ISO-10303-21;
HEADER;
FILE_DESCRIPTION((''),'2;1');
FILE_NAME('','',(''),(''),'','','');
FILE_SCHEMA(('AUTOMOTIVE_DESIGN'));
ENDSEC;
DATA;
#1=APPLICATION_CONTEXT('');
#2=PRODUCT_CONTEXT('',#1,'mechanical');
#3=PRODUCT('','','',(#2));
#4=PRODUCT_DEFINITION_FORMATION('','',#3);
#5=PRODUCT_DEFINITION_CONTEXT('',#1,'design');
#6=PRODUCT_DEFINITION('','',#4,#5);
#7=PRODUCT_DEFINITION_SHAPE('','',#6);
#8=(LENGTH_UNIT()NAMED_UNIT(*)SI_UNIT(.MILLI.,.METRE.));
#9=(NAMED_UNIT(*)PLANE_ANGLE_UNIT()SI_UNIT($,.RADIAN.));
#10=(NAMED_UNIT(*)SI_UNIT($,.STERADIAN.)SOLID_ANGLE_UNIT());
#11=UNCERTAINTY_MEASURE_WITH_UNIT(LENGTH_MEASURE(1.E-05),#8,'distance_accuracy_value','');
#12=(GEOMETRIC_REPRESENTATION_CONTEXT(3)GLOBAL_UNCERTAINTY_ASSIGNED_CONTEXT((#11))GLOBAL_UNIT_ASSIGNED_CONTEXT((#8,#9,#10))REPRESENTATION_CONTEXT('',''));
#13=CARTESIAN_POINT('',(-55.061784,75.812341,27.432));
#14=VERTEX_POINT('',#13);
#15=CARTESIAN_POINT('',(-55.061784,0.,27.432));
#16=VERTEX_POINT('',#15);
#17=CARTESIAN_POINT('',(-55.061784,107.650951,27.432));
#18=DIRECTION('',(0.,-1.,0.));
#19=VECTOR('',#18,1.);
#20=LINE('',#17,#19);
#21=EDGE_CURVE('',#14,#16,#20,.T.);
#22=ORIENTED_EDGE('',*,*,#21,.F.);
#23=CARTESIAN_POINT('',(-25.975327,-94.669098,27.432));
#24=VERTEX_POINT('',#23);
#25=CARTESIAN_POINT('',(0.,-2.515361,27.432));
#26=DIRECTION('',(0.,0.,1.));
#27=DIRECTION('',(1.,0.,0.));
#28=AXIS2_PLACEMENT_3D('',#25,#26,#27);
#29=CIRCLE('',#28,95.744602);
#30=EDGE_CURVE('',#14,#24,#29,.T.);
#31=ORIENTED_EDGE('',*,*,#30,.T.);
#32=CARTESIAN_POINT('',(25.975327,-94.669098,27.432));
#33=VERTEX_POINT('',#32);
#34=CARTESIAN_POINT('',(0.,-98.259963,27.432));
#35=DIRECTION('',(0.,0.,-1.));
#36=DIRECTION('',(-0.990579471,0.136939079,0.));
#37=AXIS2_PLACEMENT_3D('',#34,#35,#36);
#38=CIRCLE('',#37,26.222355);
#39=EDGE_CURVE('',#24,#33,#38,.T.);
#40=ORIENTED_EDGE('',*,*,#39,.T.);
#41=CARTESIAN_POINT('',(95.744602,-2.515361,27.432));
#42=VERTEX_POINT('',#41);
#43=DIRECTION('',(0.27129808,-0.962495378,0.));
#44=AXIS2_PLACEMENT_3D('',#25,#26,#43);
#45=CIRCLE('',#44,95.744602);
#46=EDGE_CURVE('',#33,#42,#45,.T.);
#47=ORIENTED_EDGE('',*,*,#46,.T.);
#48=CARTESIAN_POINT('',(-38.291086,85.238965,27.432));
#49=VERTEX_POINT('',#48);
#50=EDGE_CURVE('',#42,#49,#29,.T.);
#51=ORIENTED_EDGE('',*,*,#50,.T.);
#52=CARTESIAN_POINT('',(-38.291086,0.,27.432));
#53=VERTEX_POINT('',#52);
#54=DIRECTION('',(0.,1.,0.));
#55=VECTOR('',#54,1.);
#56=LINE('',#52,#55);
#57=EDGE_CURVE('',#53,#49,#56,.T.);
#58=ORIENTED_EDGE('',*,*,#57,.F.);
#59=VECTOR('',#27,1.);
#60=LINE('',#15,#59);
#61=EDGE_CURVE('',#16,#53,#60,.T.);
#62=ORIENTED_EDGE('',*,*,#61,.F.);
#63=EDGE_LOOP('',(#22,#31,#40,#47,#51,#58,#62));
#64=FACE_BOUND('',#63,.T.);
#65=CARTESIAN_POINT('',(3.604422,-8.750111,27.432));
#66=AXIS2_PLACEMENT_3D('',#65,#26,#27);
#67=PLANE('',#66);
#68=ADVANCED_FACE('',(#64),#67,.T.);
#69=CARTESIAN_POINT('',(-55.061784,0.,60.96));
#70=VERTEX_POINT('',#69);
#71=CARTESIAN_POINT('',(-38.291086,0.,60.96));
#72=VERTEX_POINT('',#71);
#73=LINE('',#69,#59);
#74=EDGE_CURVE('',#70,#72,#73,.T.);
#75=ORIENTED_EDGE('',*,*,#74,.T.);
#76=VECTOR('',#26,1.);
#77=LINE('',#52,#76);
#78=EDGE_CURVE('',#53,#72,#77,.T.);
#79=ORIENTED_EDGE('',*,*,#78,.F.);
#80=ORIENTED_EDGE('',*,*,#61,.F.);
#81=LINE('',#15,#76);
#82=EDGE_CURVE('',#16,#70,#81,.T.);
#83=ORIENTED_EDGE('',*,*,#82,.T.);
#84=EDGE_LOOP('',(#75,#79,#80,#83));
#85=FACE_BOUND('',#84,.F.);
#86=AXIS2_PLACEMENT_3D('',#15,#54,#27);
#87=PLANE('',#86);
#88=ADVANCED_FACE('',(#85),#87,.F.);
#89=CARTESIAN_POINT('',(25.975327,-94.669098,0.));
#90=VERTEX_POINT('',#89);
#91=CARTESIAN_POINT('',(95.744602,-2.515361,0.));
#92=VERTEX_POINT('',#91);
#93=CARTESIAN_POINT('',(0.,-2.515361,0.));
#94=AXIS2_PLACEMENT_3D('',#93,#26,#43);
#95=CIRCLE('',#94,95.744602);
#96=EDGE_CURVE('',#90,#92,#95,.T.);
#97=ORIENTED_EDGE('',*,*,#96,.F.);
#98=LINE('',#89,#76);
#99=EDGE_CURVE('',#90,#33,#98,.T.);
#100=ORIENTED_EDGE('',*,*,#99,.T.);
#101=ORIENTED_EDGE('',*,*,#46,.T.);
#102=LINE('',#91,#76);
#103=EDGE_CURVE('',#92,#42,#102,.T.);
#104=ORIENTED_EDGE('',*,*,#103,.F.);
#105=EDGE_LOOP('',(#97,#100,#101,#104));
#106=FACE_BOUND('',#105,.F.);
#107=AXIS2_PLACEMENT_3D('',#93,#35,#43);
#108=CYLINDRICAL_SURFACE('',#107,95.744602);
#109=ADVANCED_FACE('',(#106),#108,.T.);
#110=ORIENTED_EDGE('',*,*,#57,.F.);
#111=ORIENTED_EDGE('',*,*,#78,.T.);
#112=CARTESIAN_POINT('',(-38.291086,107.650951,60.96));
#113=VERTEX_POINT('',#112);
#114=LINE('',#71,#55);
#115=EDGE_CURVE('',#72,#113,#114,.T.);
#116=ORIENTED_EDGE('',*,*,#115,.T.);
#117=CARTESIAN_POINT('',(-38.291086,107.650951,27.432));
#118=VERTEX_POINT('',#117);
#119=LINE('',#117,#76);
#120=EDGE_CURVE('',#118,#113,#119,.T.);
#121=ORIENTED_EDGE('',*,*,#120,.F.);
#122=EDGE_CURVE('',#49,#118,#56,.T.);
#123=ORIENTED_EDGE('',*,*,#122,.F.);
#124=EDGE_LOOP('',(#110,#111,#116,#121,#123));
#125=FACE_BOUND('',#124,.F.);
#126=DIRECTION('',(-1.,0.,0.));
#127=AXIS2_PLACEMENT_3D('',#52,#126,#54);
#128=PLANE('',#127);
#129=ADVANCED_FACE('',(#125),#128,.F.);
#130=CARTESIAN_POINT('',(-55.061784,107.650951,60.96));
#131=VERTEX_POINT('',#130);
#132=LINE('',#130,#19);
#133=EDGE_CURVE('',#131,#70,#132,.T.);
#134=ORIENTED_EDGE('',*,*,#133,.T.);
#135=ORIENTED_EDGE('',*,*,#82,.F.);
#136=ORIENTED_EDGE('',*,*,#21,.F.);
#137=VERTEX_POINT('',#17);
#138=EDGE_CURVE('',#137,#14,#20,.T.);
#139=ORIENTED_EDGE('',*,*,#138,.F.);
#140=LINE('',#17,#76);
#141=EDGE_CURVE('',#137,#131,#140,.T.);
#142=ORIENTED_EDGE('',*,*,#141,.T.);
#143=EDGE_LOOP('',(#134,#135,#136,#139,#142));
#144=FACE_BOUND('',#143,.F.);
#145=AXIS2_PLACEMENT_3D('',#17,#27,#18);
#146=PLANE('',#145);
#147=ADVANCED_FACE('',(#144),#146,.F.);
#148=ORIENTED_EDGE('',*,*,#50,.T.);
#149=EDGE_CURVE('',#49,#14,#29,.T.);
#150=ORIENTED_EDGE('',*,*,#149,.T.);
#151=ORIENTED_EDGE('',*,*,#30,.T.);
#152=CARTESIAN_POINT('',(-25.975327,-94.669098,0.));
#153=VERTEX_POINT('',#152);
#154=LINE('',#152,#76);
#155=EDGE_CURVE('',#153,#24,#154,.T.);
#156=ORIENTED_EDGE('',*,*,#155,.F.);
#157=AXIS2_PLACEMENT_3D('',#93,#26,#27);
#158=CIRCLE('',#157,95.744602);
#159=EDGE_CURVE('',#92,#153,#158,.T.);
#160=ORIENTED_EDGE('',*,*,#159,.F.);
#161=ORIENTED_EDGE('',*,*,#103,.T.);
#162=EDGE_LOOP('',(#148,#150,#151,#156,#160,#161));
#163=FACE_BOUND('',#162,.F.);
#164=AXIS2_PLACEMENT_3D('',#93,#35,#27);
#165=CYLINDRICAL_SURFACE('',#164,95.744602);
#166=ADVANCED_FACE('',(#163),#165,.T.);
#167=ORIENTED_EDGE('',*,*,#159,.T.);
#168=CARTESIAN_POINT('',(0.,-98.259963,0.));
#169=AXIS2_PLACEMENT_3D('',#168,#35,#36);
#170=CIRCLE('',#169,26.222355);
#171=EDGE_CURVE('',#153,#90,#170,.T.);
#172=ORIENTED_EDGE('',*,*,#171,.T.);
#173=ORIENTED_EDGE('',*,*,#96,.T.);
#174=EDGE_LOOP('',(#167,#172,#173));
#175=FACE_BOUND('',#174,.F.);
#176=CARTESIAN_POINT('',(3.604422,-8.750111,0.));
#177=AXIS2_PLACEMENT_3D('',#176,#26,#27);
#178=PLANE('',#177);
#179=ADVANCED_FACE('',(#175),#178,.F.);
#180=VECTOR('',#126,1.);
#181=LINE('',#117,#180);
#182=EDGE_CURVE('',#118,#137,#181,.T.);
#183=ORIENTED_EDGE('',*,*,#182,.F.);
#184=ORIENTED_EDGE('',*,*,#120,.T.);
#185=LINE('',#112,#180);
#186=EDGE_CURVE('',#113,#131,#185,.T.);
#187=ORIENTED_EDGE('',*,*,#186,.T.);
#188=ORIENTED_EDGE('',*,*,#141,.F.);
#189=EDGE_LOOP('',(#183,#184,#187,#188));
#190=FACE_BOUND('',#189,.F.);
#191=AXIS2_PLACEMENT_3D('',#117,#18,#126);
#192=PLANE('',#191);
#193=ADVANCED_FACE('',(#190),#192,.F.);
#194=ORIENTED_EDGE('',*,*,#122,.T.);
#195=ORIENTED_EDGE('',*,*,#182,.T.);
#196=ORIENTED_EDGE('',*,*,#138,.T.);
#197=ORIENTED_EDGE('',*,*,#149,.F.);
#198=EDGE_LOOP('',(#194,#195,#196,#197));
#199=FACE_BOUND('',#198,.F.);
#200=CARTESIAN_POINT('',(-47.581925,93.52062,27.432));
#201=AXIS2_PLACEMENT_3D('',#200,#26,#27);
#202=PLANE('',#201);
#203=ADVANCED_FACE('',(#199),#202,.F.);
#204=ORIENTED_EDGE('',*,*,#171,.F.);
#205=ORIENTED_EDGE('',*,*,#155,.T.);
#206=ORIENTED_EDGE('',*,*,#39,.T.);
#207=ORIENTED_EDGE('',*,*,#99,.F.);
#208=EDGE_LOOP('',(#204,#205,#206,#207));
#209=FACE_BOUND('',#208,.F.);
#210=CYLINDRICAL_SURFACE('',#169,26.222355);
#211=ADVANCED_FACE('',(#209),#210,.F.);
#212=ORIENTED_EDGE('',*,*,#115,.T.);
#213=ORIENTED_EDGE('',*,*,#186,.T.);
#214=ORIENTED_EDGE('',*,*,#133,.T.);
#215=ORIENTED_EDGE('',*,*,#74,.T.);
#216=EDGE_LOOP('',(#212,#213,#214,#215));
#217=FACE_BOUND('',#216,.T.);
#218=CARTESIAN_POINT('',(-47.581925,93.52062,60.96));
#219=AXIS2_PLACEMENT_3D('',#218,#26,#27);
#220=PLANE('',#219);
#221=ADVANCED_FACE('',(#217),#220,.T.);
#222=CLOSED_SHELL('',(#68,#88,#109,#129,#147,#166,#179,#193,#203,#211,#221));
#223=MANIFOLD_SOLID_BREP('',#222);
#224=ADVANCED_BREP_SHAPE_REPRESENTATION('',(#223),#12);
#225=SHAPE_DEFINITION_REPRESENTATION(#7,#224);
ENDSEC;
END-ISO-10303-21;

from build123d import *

# Parameters (mm, degrees)
F3_DEPTH = 27.432
F5_DEPTH = 33.528


# Not quite as in the source:
# - the program builds the solid bodies; features that only make, move or delete a surface that nothing else refers to are left out


with BuildPart() as f3:
    # F2 (on Top) → F3 (new body)
    with BuildSketch(Plane.XY):
        with BuildLine():
            ThreePointArc((25.9753267238, -94.6690976426), (76.334874565, -60.3082301144), (95.7446020854, -2.515360713))
            ThreePointArc((95.7446020854, -2.515360713), (-57.7928694014, 73.819513852), (-25.9753267238, -94.6690976426))
            ThreePointArc((-25.9753267238, -94.6690976426), (0, -72.0376076224), (25.9753267238, -94.6690976426))
        make_face()
    extrude(amount=F3_DEPTH)

    # F4 (on face) → F5 (join)
    with BuildSketch(Plane.XY.offset(27.432)):
        with BuildLine():
            ThreePointArc((-55.0617836416, 75.8123407131), (-46.9138023818, 80.9479484388), (-38.2910855114, 85.23896453))
            Line((-38.2910855114, 85.23896453), (-38.2910855114, 107.650950551))
            Line((-38.2910855114, 107.650950551), (-55.0617836416, 107.650950551))
            Line((-55.0617836416, 107.650950551), (-55.0617836416, 75.8123407131))
        make_face()
        with BuildLine():
            Line((-55.0617836416, 0), (-38.2910855114, 0))
            Line((-38.2910855114, 0), (-38.2910855114, 85.23896453))
            ThreePointArc((-38.2910855114, 85.23896453), (-46.9138023818, 80.9479484388), (-55.0617836416, 75.8123407131))
            Line((-55.0617836416, 75.8123407131), (-55.0617836416, 0))
        make_face()
    extrude(amount=F5_DEPTH)


solid = f3.part
